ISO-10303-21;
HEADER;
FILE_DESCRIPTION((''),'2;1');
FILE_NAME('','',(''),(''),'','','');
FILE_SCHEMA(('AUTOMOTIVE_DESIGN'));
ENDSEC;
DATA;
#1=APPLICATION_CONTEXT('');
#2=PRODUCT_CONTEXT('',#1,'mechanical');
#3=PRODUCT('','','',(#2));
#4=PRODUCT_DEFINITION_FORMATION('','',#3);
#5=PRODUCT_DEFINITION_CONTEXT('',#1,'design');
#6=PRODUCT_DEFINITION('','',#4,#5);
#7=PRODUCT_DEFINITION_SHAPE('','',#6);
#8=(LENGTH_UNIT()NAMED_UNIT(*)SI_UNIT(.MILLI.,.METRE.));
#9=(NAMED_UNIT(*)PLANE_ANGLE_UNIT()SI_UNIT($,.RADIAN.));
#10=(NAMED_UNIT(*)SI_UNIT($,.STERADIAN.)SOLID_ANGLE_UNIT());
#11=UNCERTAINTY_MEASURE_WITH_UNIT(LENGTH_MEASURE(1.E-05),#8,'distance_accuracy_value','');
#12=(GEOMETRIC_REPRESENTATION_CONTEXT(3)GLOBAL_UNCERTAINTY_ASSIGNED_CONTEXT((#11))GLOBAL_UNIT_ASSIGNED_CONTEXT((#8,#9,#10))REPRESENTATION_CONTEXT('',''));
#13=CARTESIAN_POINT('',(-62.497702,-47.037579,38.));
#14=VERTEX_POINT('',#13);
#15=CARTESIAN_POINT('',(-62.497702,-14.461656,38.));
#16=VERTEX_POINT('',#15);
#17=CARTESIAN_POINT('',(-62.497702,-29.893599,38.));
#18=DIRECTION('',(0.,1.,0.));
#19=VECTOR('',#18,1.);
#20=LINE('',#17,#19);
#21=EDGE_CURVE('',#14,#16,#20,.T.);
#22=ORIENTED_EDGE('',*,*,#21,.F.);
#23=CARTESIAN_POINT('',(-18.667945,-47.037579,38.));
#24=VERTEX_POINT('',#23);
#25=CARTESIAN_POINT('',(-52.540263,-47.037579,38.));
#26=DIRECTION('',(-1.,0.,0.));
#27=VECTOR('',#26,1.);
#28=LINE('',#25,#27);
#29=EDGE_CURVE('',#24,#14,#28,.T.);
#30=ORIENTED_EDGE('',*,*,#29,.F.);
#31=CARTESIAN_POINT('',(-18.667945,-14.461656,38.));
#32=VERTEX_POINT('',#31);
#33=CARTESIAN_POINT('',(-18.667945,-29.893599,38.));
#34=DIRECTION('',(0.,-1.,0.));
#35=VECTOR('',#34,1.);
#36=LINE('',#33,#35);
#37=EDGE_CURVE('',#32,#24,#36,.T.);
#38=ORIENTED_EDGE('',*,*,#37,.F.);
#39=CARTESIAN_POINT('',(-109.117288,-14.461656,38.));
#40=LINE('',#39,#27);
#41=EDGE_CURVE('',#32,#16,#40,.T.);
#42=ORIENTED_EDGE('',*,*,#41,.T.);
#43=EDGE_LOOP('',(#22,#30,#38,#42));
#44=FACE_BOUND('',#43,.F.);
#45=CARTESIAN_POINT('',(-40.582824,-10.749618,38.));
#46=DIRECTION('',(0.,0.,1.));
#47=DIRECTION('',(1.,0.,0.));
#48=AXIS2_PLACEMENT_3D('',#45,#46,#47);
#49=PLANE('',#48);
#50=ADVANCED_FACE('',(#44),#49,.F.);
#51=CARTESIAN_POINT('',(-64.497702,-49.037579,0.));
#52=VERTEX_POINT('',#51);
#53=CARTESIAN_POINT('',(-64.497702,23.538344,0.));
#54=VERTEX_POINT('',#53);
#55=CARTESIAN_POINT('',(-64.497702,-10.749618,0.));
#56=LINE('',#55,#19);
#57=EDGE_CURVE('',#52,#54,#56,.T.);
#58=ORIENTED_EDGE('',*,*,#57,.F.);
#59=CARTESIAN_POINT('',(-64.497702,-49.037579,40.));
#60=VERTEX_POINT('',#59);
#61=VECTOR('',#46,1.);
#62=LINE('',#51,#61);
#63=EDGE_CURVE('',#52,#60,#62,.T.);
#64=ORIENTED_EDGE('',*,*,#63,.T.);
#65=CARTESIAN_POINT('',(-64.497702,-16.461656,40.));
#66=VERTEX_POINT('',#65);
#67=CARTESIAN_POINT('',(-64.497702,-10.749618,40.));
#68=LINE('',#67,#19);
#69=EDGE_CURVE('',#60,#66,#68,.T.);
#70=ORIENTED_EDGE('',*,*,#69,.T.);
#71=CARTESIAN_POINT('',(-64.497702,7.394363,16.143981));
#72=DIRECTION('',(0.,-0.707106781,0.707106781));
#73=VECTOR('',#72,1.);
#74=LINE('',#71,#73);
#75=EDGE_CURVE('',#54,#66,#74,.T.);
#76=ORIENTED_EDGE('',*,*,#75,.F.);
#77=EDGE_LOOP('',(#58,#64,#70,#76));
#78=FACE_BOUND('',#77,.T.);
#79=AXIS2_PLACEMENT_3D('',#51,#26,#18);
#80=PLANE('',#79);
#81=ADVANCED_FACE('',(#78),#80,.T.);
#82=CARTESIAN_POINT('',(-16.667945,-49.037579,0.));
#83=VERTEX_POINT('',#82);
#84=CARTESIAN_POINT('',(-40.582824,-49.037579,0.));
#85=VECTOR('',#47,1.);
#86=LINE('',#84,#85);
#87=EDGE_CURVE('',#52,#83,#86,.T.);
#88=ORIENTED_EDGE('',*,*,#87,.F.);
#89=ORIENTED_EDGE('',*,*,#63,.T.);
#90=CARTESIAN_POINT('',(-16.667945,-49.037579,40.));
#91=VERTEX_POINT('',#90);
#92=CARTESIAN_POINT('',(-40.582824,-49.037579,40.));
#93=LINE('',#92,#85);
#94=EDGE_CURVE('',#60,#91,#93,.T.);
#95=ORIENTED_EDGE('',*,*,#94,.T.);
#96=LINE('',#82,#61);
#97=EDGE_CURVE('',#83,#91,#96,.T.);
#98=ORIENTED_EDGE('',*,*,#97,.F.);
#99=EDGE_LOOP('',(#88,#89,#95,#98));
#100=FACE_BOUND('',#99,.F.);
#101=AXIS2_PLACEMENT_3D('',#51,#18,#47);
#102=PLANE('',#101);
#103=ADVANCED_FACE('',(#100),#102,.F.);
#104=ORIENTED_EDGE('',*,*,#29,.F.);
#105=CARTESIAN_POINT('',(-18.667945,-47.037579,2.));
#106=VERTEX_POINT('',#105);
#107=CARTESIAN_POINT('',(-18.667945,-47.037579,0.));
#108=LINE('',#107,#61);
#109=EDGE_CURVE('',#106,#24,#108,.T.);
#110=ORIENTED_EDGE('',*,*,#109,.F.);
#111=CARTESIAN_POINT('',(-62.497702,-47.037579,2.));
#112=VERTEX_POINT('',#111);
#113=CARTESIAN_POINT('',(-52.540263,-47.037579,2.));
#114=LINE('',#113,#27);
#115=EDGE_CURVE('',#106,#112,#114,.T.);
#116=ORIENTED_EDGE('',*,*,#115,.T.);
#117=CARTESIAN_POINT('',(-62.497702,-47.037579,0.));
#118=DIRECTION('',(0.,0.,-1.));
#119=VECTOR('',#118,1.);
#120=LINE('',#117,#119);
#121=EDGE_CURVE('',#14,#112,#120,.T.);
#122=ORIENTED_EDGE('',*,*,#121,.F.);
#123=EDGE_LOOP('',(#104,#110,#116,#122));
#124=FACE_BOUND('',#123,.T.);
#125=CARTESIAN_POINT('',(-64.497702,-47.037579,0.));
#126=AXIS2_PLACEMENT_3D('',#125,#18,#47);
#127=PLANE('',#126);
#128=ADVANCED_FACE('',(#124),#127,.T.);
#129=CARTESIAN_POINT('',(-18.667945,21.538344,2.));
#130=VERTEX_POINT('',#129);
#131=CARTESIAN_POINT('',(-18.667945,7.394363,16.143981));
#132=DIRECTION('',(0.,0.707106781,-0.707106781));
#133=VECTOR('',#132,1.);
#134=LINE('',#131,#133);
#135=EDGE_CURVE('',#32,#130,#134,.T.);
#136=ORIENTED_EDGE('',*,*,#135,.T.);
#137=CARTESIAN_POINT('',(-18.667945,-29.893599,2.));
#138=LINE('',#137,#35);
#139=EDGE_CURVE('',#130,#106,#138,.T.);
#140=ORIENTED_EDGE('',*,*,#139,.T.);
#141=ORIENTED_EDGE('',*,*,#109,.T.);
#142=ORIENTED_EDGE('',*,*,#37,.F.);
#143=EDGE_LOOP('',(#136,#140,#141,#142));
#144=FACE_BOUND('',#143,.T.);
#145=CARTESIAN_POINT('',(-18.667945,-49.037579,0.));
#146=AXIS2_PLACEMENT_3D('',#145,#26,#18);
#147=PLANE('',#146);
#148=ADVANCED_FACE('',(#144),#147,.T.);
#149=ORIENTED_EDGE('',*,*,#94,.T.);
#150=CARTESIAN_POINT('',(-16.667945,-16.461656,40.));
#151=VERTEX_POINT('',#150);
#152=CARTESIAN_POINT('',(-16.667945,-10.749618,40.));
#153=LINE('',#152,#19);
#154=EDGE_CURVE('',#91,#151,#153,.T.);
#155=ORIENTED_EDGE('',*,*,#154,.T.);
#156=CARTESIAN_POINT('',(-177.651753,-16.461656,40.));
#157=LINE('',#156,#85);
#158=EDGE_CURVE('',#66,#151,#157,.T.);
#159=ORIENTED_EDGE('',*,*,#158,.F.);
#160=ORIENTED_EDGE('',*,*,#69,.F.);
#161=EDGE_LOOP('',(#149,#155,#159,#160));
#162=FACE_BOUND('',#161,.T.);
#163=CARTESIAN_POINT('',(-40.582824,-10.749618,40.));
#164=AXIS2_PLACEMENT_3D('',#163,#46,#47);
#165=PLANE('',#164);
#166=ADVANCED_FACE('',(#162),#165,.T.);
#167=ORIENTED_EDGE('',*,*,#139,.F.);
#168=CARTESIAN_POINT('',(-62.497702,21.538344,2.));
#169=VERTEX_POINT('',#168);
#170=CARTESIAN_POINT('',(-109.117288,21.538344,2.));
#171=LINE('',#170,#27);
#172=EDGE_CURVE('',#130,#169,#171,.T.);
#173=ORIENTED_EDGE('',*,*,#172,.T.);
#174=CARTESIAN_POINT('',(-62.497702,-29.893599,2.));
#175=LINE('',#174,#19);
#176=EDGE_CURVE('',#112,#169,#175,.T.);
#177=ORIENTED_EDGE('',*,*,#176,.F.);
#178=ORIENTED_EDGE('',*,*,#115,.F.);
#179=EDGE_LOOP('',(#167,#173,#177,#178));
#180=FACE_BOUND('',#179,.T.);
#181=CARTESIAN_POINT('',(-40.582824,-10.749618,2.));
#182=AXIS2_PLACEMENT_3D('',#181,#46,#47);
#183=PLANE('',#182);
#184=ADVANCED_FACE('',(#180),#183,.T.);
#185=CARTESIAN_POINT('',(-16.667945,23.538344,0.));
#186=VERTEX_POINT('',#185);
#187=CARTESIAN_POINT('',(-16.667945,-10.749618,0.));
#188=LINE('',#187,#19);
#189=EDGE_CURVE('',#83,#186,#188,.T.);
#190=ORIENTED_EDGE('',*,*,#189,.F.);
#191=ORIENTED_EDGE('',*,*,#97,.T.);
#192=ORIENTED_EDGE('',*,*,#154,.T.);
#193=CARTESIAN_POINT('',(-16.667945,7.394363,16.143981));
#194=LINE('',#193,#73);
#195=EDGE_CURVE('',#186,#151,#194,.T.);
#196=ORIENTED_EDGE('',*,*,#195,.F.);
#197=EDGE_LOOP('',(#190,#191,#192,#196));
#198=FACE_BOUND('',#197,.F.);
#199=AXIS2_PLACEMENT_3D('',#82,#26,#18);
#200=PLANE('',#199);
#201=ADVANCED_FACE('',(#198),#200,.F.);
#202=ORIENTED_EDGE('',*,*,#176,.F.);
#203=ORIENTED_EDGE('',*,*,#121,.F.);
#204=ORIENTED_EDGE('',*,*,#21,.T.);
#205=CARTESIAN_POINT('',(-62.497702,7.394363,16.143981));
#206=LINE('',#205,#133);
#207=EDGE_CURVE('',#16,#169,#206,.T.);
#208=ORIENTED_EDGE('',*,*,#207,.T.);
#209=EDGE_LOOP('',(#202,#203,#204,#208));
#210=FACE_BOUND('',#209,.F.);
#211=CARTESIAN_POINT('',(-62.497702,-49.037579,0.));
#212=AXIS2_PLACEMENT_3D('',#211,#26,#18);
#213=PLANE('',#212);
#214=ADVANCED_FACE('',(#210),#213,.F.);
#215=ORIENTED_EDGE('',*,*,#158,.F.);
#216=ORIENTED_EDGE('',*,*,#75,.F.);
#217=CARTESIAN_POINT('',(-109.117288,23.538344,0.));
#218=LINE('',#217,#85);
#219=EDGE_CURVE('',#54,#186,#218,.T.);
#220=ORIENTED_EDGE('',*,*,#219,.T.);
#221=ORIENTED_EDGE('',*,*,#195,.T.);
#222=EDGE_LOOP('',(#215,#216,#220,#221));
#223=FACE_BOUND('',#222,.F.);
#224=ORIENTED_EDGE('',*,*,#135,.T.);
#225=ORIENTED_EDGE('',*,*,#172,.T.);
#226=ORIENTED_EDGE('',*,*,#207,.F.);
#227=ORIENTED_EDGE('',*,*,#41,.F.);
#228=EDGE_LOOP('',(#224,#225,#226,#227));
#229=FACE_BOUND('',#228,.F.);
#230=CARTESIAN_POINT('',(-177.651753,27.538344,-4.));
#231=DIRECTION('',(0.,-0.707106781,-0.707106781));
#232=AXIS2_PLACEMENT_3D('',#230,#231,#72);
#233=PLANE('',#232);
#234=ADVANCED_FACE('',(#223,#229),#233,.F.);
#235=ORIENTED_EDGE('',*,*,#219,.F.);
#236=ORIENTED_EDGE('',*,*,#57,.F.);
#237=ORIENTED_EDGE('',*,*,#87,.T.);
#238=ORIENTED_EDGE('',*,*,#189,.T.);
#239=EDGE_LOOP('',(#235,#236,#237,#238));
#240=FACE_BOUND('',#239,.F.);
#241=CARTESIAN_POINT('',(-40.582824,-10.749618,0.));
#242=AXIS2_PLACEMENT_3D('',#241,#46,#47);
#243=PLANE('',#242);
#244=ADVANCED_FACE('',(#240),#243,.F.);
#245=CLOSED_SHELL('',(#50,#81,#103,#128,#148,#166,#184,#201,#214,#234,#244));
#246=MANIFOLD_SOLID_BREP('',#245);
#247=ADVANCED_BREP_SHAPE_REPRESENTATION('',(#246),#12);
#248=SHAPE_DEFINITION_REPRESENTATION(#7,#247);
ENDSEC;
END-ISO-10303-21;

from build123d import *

# Parameters (mm, degrees)
F0_W        = 47.8297565132
F0_H        = 76.5759237111
F1_DEPTH    = 40
F2_T1_DEPTH = 274.1378594542
F3_T        = -2


# Not quite as in the source:
# - a fillet or chamfer that OpenCascade refuses, or shapes differently, is made with other operations: its cross-section is extruded or revolved along the edge and cut away or added


with BuildPart() as f1:
    # F0 (on Top) → F1 (new body)
    with BuildSketch(Plane.XY):
        with Locations((-40.5828235671, -10.7496175915)):
            Rectangle(F0_W, F0_H)
    extrude(amount=F1_DEPTH)

    # F2: chamfer of 44 on 1 edges, made by hand

    # F2_s2 → F2_t1 (cut)
    with BuildSketch(Plane.YZ.offset(-177.6517532942)):
        Polygon((27.538344264, -4), (-16.461655736, 40), (27.538344264, 40), align=None)
    extrude(amount=F2_T1_DEPTH, mode=Mode.SUBTRACT)

    # F3
    f3_openings = [f1.faces().sort_by_distance(p)[0] for p in [
        (-40.582824, 3.538344, 20),
    ]]
    offset(amount=F3_T, openings=f3_openings, kind=Kind.INTERSECTION)


solid = f1.part
